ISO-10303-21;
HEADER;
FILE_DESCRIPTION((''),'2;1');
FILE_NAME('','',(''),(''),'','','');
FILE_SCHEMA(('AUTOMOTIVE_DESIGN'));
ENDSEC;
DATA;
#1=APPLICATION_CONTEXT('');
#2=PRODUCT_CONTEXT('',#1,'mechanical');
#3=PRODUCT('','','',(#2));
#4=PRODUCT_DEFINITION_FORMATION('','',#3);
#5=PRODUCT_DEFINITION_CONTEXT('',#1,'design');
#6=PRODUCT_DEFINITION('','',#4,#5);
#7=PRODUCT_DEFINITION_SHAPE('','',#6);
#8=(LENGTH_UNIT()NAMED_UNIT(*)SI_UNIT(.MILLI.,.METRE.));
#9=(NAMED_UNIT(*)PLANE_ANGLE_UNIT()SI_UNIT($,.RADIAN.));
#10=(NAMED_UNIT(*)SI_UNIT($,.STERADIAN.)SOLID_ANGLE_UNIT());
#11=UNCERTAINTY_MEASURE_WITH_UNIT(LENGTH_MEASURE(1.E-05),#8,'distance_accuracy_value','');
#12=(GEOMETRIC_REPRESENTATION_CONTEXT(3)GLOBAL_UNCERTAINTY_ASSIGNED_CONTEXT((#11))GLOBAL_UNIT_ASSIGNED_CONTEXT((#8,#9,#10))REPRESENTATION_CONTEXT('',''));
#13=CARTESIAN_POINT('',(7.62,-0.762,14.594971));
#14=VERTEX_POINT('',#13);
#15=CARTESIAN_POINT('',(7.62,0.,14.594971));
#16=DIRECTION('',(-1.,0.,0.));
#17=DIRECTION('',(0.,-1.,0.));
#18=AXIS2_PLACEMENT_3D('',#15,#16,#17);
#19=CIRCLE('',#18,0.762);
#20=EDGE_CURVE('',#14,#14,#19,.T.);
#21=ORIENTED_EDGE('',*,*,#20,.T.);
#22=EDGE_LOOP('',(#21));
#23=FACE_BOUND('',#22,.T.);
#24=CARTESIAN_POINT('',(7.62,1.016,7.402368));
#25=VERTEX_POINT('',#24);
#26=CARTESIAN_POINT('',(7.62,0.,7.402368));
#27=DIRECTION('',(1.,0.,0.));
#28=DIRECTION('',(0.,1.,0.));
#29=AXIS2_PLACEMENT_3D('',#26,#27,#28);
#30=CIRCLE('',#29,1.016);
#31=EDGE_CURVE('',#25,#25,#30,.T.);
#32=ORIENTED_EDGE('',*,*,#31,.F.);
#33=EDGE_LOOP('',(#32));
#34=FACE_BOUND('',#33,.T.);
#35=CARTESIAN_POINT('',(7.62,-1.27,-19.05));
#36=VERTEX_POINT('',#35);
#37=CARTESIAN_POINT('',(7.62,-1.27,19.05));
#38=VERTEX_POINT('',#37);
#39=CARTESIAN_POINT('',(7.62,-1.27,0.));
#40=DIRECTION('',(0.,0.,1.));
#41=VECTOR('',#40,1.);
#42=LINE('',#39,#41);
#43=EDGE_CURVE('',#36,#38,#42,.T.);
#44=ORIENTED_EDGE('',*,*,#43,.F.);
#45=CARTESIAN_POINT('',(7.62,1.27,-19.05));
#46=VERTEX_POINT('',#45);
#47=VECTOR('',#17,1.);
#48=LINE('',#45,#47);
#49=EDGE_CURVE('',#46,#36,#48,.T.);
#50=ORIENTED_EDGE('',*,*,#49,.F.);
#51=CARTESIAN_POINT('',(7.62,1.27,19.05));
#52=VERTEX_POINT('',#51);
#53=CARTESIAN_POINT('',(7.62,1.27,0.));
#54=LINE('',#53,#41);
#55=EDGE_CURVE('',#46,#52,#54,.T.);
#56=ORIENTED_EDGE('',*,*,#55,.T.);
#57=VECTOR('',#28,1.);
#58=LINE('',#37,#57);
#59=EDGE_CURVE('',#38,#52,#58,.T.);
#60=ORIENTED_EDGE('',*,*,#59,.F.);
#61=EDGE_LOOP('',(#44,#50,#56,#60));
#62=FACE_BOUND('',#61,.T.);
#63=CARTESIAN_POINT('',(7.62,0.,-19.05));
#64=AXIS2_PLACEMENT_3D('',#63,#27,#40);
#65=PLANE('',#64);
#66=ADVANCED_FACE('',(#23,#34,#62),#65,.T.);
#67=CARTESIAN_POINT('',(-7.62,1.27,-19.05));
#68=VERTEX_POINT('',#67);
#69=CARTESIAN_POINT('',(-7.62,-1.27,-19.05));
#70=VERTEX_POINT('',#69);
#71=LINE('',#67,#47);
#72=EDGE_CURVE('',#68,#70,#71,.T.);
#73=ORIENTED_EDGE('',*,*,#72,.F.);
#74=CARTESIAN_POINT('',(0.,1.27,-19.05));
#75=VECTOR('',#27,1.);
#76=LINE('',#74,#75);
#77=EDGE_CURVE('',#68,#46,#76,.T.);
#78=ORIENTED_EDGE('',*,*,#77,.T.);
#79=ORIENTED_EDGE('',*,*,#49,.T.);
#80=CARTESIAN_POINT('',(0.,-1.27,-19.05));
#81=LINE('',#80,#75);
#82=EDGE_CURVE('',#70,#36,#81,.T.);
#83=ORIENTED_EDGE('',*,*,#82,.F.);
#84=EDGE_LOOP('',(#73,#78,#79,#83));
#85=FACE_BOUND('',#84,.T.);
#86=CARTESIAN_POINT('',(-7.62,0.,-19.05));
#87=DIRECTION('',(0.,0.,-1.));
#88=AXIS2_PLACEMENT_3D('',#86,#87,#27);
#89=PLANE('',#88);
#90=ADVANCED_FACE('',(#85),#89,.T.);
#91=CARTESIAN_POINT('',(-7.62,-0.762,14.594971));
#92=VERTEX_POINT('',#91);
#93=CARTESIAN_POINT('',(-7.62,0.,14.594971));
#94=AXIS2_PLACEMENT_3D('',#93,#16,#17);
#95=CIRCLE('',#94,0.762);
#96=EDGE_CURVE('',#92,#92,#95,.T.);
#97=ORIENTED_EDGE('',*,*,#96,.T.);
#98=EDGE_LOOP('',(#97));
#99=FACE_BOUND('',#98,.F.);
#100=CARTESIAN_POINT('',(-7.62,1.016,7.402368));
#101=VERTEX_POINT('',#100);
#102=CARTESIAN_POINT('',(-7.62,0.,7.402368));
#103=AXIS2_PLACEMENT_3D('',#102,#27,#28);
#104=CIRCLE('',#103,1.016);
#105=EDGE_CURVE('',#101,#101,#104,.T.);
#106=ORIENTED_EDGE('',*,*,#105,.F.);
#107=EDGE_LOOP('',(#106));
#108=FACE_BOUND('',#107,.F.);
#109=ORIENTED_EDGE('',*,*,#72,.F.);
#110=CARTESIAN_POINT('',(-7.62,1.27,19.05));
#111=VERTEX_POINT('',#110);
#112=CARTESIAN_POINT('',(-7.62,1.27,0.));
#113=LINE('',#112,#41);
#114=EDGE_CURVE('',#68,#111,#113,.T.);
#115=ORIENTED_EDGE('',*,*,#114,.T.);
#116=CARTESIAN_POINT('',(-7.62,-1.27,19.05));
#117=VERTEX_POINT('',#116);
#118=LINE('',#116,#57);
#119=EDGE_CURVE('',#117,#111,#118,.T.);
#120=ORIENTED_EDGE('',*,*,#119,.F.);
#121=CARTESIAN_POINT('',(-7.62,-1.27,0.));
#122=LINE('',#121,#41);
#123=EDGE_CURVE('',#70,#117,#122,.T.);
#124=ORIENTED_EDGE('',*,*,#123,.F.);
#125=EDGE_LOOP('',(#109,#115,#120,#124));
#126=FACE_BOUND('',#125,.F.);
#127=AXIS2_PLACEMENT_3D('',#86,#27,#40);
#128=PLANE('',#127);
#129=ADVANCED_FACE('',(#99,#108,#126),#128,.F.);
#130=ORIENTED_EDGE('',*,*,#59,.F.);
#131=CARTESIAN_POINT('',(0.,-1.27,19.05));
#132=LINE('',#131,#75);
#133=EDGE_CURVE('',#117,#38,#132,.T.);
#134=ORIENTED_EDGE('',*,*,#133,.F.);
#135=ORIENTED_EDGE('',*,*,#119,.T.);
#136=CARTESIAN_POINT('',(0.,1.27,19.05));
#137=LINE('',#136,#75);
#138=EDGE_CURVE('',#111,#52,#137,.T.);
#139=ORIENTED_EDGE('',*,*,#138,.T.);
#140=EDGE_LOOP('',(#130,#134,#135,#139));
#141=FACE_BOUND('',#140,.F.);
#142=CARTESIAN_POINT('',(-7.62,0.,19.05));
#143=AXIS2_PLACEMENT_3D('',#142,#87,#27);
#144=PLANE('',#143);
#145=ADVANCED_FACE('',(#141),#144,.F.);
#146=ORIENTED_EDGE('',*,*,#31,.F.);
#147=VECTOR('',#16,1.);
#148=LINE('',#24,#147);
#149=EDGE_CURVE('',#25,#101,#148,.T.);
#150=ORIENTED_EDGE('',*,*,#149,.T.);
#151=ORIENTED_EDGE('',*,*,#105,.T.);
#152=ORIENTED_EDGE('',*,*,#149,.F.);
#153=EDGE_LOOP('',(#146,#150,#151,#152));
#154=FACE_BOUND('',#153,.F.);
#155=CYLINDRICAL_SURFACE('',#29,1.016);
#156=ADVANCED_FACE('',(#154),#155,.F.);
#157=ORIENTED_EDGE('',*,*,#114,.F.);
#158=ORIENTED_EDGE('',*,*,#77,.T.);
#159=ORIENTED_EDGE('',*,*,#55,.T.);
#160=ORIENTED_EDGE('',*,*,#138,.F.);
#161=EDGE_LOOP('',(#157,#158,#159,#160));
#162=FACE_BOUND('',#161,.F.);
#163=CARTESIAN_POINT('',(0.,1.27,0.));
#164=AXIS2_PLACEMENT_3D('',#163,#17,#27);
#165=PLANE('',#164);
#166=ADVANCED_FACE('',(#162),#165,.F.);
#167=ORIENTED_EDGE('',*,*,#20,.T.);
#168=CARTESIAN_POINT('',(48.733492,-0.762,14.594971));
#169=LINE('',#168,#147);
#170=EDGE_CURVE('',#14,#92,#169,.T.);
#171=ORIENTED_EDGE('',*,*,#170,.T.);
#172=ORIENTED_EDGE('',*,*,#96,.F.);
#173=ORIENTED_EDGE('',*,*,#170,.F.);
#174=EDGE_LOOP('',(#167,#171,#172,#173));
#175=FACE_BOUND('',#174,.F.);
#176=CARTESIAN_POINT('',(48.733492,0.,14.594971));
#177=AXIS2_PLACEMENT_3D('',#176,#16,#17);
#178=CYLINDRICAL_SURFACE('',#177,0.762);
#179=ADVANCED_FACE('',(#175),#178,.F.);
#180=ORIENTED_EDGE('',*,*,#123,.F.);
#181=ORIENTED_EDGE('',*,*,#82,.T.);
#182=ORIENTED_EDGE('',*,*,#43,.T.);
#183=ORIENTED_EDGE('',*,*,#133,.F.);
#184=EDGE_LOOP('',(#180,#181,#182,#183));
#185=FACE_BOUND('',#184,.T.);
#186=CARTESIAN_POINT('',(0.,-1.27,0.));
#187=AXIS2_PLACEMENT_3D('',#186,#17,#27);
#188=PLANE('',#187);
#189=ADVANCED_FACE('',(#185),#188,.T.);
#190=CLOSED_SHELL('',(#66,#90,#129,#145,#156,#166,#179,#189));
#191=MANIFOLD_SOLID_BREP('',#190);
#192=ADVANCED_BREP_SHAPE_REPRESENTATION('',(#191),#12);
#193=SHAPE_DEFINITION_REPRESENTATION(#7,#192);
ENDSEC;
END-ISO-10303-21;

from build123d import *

# Parameters (mm, degrees)
F0_W     = 15.24
F0_H     = 38.1
F1_DEPTH = 1.27
F5_D     = 1.524
F6_R     = 1.016
F7_DEPTH = 15.241


# Not quite as in the source:
# - the program builds the solid bodies; features that only make, move or delete a surface that nothing else refers to are left out


with BuildPart() as f1:
    # F0 (on Front) → F1 (new body, symmetric)
    with BuildSketch(Plane.XZ):
        Rectangle(F0_W, F0_H)
    extrude(amount=F1_DEPTH, both=True)

    # F5 (through all)
    with Locations(Plane.YZ.offset(7.62)):
        with Locations((0, 14.5949712023)):
            Hole(F5_D / 2)

    # F6 (on face) → F7 (cut, through all)
    with BuildSketch(Plane.YZ.offset(7.62)):
        with Locations((0, 7.4023683179)):
            Circle(F6_R)
    extrude(amount=-F7_DEPTH, mode=Mode.SUBTRACT)


solid = f1.part
